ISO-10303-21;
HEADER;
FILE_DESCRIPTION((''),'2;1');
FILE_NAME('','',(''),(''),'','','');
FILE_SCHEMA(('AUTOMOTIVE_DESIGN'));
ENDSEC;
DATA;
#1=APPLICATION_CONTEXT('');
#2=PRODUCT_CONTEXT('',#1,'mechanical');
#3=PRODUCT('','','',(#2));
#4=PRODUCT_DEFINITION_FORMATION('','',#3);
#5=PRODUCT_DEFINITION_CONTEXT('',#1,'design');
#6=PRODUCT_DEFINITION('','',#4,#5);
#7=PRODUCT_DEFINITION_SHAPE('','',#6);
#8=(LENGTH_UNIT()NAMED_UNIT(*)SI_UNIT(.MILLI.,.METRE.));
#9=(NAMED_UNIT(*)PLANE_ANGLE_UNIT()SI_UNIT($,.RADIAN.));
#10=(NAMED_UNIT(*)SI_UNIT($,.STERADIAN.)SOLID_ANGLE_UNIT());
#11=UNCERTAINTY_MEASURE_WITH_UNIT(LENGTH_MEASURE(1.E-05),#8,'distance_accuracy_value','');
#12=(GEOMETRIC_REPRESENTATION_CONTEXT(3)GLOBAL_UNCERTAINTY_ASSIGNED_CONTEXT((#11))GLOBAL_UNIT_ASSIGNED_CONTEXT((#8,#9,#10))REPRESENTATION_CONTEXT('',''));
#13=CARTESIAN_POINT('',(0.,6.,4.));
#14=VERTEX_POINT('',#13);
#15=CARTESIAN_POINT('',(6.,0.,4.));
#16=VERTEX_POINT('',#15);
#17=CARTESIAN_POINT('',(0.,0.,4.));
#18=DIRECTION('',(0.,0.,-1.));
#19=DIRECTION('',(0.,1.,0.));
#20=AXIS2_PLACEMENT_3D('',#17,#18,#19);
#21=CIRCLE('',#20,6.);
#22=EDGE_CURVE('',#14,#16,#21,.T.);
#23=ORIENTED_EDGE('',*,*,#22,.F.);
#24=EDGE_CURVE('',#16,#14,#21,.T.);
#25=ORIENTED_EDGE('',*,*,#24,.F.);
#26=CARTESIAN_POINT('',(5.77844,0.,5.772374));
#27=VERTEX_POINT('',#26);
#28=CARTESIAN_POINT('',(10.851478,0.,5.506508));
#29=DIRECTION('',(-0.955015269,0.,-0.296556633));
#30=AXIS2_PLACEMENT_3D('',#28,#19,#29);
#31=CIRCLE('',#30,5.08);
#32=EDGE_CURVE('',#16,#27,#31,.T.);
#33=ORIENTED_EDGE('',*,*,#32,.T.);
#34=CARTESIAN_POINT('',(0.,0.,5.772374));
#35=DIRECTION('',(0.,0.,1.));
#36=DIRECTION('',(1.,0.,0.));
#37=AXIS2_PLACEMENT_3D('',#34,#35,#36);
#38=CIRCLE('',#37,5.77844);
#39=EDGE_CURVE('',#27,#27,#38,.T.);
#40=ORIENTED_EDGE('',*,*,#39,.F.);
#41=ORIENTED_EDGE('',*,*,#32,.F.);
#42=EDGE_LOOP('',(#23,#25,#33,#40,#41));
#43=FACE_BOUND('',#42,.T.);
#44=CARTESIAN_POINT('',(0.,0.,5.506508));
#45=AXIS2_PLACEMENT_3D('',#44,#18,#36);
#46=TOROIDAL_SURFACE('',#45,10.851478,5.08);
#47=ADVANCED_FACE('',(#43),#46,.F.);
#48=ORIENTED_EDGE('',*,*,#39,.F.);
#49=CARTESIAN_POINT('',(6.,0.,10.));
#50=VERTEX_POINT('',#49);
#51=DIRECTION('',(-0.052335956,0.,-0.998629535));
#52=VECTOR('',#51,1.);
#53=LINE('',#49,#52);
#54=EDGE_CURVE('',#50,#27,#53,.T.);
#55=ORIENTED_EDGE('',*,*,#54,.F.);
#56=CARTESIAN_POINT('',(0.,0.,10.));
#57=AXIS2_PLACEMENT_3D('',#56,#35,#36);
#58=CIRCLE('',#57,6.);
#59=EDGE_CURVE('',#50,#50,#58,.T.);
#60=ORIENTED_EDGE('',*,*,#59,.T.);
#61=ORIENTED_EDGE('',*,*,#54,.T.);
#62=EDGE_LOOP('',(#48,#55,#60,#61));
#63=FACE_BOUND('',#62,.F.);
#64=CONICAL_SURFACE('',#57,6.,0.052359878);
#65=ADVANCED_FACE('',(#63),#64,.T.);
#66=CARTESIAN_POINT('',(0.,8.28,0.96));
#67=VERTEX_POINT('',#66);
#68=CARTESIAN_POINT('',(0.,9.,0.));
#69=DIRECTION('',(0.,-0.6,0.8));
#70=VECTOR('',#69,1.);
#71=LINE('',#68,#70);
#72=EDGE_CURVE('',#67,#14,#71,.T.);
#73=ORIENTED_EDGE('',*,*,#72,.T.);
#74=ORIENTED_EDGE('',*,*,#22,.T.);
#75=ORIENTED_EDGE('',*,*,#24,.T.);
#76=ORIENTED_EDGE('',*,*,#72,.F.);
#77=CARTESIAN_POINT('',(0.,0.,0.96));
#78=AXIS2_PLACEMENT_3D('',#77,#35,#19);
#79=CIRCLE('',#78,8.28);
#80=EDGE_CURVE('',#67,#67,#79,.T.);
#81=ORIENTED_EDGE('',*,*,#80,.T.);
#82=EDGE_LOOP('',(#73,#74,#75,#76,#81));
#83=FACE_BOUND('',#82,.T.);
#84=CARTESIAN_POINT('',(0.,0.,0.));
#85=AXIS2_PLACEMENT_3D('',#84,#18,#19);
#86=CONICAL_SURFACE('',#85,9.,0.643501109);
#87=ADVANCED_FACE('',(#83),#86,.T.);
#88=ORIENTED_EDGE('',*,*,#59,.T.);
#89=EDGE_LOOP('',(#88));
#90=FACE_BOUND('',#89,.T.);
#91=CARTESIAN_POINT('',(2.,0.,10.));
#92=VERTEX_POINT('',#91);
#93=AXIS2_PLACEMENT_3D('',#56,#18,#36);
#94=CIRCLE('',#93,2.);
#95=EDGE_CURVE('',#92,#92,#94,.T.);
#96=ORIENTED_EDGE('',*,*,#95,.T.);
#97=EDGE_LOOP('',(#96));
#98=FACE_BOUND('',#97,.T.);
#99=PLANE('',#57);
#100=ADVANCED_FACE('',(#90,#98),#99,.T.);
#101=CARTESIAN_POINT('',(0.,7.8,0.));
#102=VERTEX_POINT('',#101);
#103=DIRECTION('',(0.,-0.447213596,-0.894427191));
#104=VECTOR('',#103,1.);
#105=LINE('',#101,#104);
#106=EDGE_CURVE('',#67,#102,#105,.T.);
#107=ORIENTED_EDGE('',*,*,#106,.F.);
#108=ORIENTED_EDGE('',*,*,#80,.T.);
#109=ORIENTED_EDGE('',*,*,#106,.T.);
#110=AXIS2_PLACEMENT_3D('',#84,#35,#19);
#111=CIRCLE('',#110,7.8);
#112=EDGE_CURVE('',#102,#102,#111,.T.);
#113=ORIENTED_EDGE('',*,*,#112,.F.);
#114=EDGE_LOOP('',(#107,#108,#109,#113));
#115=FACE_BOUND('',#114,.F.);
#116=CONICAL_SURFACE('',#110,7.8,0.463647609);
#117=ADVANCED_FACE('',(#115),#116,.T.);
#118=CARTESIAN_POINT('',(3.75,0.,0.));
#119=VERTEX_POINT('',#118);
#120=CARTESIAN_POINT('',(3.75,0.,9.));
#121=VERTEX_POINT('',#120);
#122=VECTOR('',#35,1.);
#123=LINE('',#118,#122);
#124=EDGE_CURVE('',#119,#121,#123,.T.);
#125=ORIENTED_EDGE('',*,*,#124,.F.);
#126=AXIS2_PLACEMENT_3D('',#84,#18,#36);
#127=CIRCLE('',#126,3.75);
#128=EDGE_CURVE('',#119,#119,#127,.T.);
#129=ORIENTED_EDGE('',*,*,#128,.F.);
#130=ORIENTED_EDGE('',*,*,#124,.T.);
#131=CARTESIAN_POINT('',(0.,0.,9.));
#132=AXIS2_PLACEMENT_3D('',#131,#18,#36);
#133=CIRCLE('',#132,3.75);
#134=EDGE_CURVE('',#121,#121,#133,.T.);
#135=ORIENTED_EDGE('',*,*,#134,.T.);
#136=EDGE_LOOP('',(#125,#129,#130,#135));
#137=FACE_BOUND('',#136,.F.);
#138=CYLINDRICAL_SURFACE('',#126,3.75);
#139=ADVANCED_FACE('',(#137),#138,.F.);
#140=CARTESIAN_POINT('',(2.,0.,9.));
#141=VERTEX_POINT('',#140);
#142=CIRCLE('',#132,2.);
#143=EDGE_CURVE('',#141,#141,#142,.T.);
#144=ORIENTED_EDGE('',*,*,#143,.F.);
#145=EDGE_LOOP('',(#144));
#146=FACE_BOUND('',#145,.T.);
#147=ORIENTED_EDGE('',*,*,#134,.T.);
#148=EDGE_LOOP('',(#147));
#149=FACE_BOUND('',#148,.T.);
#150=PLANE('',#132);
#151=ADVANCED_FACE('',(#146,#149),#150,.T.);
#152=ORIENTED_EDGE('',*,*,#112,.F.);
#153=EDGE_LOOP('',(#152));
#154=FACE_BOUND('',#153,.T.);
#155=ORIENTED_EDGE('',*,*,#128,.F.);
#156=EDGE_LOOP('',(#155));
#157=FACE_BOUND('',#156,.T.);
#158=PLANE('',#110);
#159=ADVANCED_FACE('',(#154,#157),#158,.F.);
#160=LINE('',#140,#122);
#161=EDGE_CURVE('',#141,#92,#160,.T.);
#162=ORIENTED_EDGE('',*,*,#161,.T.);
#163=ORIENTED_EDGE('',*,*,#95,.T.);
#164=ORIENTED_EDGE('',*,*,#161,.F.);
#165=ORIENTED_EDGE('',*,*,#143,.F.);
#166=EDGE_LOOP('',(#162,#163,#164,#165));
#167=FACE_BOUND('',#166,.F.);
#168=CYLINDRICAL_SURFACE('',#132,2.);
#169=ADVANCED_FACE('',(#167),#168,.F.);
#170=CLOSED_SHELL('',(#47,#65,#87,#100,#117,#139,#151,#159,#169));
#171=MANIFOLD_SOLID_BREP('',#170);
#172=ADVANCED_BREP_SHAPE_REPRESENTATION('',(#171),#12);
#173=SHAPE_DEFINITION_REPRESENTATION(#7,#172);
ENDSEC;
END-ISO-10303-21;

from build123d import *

# Parameters (mm, degrees)
F0_R     = 6
F1_DEPTH = 10
F4_R     = 3.75
F5_DEPTH = 9
F6_R     = 2
F7_DEPTH = 3.5
F11_SIZE = 1.2


# Not quite as in the source:
# - a fillet or chamfer that OpenCascade refuses, or shapes differently, is made with other operations: its cross-section is extruded or revolved along the edge and cut away or added


with BuildPart() as f1:
    # F0 (on Top) → F1 (new body)
    with BuildSketch(Plane.XY):
        Circle(F0_R)
    extrude(amount=F1_DEPTH)

    # F2 (on Right) → F3 (revolve)
    with BuildSketch(Plane.YZ):
        Polygon((9, 0), (6, 4), (6, 0), align=None)
    revolve(axis=Axis((0, 0, 0), (0, 0, 1)))

    # F4 (on face) → F5 (cut)
    with BuildSketch(Plane(origin=(0, 0, 0), x_dir=(1, 0, 0), z_dir=(0, 0, -1))):
        Circle(F4_R)
    extrude(amount=-F5_DEPTH, mode=Mode.SUBTRACT)

    # F6 (on face) → F7 (cut)
    with BuildSketch(Plane(origin=(0, 0, 9), x_dir=(1, 0, 0), z_dir=(0, 0, -1))):
        Circle(F6_R)
    extrude(amount=-F7_DEPTH, mode=Mode.SUBTRACT)

    # F8 (on Front) → F9 (revolve, cut)
    with BuildSketch(Plane.XZ):
        Polygon((6, 4), (6, 10), (5.6855533243, 4), align=None)
    revolve(axis=Axis((0, 0, 10), (0, 0, 1)), mode=Mode.SUBTRACT)

    # F10: fillet of radius 5.08 on 1 edges, made by hand

    # F10_s1 → F10_t2 (revolve)
    with BuildSketch(Plane.XZ):
        with BuildLine():
            ThreePointArc((6, 4), (5.8107107389, 4.8763729429), (5.7784395282, 5.7723743538))
            Line((5.7784395282, 5.7723743538), (5.6769787675, 5.7776916869))
            Line((5.6769787675, 5.7776916869), (5.5840925636, 4.0053173332))
            Line((5.5840925636, 4.0053173332), (5.6855533243, 3.8984))
            ThreePointArc((5.6855533243, 3.8984), (5.8427766622, 3.8984), (5.9029704487, 3.9698698461))
            Line((5.9029704487, 3.9698698461), (6, 4))
        make_face()
    revolve(axis=Axis((0, 0, 4), (0, 0, 1)))

    # F11
    f11_edges = [f1.edges().sort_by_distance(p)[0] for p in [
        (0, -9, 0),
    ]]
    chamfer(f11_edges, length=F11_SIZE)


solid = f1.part
